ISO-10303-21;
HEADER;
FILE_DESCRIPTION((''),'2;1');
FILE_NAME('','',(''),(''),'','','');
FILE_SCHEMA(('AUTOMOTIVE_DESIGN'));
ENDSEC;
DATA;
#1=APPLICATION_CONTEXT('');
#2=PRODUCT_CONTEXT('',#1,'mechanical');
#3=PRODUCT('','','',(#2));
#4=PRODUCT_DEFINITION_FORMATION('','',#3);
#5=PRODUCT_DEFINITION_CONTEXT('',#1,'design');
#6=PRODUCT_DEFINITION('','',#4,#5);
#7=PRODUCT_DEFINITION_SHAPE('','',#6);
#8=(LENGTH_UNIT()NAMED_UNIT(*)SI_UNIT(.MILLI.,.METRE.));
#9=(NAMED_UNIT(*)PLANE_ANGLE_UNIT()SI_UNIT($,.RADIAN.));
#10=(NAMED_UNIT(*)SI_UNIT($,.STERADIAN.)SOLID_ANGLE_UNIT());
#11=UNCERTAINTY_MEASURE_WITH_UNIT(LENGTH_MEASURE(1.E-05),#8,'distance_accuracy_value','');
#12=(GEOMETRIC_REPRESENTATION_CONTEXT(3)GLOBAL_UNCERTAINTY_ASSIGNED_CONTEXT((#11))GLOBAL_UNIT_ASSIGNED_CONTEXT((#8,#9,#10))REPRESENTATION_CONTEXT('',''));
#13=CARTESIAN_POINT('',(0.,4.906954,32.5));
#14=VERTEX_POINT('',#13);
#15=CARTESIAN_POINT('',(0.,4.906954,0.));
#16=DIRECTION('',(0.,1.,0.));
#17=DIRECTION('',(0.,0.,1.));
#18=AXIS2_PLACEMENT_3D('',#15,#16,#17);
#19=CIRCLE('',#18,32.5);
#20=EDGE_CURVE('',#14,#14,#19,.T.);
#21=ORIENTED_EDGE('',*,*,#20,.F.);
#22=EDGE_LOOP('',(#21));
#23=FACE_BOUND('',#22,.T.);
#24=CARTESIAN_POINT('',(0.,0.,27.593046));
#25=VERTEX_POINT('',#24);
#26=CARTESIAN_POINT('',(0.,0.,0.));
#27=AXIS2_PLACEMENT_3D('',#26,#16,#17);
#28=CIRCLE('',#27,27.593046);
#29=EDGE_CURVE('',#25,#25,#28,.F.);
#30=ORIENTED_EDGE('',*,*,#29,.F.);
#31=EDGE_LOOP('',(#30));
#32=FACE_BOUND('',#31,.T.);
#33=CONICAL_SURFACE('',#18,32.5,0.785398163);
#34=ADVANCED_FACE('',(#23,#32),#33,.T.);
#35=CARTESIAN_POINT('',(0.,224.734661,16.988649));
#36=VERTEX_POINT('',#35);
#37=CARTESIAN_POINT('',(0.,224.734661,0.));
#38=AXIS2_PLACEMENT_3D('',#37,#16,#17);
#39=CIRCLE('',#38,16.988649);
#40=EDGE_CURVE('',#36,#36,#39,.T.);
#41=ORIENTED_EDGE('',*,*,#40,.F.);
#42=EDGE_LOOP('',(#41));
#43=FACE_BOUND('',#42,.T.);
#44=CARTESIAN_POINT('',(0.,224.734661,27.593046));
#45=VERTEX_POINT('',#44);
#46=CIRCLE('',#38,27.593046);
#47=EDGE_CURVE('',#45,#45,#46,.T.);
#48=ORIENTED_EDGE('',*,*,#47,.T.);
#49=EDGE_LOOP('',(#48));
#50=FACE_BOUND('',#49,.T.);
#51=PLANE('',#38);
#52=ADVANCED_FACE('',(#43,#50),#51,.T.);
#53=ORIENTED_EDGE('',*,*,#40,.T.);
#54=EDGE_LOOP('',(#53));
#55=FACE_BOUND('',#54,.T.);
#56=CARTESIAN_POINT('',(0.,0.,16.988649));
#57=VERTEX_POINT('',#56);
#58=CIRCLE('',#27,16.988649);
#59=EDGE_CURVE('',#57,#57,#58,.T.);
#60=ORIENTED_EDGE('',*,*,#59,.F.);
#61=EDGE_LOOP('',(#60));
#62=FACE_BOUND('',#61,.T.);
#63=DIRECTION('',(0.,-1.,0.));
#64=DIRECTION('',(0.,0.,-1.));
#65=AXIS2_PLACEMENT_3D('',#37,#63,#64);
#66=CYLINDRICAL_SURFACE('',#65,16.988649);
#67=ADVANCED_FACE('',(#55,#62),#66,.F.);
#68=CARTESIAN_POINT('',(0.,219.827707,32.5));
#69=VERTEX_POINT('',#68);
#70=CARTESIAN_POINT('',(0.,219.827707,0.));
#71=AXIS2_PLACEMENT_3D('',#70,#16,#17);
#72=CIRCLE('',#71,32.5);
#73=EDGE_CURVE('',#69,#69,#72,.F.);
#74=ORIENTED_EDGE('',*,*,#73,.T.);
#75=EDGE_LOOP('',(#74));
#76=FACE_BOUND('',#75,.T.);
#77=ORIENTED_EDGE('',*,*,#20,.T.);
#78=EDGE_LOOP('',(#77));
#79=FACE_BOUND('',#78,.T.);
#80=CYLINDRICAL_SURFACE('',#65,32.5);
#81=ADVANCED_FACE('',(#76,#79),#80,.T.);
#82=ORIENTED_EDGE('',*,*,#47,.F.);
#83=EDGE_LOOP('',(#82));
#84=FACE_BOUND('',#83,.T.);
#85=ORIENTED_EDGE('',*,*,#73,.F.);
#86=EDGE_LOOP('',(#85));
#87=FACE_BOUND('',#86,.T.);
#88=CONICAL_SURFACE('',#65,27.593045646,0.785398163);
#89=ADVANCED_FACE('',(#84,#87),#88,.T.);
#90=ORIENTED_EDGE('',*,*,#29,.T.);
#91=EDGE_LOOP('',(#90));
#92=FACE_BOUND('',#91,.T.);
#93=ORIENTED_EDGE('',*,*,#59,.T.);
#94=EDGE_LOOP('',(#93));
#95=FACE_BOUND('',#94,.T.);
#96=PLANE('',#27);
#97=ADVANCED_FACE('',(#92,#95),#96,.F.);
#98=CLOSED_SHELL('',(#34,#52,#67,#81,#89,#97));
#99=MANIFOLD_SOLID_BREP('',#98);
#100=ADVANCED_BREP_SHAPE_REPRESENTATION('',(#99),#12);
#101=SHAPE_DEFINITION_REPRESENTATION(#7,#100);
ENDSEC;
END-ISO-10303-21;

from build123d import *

# Parameters (mm, degrees)
SKETCH1_R           = 32.5
BOSS_EXTRUDE1_DEPTH = 224.734660975
SKETCH2_R           = 16.988648898
CUT_EXTRUDE1_DEPTH  = 230.386503185
CHAMFER1_SIZE       = 4.906954354


with BuildPart() as part:
    # Sketch1 → Boss-Extrude1 (new body)
    with BuildSketch(Plane(origin=(0, 0, 0), x_dir=(1, 0, 0), z_dir=(0, 1, 0))):
        Circle(SKETCH1_R)
    extrude(amount=BOSS_EXTRUDE1_DEPTH)

    # Sketch2 → Cut-Extrude1 (cut, through all)
    with BuildSketch(Plane(origin=(0, 0, 0), x_dir=(1, 0, 0), z_dir=(0, 1, 0))):
        Circle(SKETCH2_R)
    extrude(amount=CUT_EXTRUDE1_DEPTH, mode=Mode.SUBTRACT)

    # Chamfer1
    chamfer1_edges = [part.edges().sort_by_distance(p)[0] for p in [
        (-32.5, 224.734660975, 0),
        (-32.5, 0, 0),
    ]]
    chamfer(chamfer1_edges, length=CHAMFER1_SIZE)


solid = part.part
